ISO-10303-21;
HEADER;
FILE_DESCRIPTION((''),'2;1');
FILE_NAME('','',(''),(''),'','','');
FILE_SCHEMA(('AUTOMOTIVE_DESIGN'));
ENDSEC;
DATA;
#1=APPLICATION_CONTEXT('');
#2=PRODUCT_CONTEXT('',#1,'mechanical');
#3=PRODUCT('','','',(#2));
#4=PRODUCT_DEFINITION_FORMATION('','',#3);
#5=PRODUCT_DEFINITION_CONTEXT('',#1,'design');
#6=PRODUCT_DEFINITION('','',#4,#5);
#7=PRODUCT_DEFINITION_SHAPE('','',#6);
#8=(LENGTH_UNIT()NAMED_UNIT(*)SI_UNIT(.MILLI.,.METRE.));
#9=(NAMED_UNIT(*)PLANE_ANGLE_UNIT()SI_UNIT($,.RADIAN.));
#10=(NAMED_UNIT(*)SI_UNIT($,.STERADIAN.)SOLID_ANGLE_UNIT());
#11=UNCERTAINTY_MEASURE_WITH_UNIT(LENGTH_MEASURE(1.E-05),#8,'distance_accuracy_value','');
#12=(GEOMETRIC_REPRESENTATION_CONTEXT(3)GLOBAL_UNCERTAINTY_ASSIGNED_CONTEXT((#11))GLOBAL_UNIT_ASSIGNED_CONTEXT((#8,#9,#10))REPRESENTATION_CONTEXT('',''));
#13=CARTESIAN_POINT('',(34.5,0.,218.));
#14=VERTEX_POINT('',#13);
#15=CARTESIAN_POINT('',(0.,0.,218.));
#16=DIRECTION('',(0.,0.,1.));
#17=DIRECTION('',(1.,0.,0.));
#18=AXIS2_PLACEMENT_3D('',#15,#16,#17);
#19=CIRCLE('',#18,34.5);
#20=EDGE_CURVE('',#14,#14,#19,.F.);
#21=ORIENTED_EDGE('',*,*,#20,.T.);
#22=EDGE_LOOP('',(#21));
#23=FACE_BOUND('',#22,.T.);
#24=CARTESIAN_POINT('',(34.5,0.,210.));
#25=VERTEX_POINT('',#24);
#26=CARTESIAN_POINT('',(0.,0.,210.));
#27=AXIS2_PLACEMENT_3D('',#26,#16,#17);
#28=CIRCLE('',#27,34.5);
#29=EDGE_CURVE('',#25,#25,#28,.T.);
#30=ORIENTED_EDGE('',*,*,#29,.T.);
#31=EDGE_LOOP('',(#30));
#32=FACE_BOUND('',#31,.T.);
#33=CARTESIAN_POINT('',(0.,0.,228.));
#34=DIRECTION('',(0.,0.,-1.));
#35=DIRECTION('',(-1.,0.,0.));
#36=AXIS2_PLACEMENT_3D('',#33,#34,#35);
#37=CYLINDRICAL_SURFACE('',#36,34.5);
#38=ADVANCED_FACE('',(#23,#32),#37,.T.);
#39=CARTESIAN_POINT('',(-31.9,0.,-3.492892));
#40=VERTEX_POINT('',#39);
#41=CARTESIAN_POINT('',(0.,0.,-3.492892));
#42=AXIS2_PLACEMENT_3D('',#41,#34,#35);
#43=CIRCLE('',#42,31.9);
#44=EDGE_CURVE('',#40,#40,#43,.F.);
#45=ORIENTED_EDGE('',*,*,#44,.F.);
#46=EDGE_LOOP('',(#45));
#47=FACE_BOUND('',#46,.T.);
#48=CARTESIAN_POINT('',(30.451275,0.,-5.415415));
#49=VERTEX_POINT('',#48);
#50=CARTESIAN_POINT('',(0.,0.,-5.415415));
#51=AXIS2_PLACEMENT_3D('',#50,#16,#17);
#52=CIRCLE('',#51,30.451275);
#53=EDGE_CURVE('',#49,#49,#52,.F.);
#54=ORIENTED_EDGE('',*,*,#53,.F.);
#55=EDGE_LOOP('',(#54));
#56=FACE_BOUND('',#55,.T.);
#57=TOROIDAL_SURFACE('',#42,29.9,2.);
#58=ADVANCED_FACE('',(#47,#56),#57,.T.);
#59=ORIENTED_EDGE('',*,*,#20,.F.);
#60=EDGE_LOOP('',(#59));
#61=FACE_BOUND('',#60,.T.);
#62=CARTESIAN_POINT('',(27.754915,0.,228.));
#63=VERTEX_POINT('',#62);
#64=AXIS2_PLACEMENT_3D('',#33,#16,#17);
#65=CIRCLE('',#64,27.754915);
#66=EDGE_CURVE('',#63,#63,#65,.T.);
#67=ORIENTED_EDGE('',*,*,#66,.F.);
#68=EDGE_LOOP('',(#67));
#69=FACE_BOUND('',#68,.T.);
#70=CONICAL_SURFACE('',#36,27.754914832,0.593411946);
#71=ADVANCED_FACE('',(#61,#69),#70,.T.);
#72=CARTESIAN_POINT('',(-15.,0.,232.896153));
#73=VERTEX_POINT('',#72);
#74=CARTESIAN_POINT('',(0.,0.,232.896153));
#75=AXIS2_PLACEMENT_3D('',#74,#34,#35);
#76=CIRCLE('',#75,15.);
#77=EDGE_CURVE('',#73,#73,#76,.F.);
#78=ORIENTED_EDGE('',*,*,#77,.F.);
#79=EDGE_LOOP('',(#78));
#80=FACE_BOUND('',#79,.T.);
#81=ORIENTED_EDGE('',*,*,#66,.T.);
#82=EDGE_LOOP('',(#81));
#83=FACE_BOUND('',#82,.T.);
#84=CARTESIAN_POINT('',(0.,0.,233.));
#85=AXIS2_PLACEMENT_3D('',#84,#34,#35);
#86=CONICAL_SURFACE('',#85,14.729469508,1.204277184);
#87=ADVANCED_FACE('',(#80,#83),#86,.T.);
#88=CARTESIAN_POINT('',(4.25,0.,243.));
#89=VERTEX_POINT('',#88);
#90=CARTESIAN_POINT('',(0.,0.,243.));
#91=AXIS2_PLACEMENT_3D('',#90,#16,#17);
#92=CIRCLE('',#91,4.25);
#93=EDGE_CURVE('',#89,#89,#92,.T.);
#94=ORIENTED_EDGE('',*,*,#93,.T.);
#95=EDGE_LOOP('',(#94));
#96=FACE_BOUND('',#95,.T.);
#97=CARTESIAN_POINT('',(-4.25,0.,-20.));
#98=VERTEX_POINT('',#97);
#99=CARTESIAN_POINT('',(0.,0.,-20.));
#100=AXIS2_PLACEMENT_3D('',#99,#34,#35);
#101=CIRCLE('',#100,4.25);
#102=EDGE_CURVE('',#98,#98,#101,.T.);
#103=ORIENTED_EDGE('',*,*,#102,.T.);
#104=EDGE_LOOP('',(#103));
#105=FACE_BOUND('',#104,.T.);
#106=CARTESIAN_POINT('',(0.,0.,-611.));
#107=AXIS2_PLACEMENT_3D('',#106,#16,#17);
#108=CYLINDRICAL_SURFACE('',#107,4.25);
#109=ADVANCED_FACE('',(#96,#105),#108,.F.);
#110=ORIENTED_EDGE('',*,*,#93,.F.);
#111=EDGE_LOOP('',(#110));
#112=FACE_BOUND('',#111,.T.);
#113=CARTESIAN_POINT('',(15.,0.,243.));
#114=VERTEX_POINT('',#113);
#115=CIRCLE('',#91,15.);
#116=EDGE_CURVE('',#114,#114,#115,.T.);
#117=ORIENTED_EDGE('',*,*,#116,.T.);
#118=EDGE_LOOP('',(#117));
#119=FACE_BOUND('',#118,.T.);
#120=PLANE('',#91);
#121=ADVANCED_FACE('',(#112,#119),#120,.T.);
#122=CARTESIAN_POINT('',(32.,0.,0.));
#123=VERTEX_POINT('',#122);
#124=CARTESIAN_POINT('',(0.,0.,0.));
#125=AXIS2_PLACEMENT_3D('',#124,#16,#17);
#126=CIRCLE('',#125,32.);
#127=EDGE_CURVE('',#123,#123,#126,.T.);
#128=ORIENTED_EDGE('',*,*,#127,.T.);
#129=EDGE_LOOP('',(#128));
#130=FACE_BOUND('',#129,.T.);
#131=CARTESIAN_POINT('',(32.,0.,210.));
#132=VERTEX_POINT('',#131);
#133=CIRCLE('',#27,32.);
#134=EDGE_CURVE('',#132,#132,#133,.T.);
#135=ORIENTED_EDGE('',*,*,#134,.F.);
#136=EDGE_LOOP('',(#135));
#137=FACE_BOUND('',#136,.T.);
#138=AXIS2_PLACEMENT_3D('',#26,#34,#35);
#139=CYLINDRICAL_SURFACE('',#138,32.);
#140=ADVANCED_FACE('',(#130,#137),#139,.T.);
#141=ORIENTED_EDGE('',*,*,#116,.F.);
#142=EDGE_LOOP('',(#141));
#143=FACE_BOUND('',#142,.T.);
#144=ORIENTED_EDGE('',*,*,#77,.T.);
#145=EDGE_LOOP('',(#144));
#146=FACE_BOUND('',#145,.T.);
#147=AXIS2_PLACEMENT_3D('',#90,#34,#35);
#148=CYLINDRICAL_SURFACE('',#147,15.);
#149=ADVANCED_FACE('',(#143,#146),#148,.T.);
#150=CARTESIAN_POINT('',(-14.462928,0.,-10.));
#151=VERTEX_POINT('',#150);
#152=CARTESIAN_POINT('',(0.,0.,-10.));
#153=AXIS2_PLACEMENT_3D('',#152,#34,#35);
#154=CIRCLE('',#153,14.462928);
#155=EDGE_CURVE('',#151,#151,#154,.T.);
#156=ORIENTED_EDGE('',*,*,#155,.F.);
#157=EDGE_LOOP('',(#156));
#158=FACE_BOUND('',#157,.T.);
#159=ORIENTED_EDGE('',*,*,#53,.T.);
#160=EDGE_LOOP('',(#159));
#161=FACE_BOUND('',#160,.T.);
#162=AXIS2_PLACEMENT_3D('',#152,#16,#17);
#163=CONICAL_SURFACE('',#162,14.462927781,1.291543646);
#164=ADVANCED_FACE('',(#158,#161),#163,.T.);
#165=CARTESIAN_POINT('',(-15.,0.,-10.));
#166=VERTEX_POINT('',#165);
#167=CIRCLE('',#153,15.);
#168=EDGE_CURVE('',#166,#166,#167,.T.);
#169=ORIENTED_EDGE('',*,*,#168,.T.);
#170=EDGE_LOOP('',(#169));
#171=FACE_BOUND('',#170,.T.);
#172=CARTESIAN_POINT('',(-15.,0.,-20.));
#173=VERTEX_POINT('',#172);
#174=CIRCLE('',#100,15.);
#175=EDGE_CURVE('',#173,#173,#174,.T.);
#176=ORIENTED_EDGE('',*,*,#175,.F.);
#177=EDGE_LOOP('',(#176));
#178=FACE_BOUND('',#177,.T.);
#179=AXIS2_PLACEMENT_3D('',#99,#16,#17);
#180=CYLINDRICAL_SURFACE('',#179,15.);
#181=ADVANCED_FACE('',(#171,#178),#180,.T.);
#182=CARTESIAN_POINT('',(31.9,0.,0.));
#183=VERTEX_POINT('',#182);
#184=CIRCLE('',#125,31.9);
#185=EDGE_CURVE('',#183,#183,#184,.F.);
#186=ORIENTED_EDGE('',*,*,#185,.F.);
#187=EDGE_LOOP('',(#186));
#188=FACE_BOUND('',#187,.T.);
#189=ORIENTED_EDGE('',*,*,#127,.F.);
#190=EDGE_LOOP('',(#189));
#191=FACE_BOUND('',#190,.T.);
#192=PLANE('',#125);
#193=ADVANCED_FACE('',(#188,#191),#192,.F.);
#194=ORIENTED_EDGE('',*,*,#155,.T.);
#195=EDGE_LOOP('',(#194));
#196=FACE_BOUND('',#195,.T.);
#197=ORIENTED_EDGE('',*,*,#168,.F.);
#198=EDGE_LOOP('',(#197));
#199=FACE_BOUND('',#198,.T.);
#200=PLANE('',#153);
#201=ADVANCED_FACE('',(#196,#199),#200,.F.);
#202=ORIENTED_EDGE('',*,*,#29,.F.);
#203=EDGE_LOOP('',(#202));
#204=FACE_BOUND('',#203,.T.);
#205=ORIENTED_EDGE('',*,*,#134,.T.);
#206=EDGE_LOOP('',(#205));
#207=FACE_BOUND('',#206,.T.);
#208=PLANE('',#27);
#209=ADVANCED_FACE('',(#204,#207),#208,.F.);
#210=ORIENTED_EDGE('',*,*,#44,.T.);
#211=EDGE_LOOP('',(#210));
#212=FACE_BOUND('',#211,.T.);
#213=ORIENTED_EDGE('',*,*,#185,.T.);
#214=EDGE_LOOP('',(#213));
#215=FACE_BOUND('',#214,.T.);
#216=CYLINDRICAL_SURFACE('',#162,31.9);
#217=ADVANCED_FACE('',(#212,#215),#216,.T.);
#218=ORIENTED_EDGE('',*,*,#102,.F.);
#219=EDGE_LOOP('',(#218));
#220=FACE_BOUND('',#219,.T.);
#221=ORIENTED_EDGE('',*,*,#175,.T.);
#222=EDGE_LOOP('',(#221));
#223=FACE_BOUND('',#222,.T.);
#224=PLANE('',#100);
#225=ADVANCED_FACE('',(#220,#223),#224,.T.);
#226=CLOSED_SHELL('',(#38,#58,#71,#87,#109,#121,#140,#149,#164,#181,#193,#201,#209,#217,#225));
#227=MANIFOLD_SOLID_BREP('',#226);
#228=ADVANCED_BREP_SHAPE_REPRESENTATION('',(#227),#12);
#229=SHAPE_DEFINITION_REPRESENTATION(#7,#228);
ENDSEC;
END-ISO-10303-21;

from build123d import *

# Parameters (mm, degrees)
SKETCH1_R           = 32
BOSS_EXTRUDE1_DEPTH = 210
SKETCH2_R           = 34.5
BOSS_EXTRUDE2_DEPTH = 18
CHAMFER1_SIZE       = 10
CHAMFER1_SIZE2      = 6.745085168
SKETCH3_R           = 27.754914832
BOSS_EXTRUDE3_DEPTH = 5
SKETCH4_R           = 15
BOSS_EXTRUDE4_DEPTH = 10
SKETCH5_R           = 4.25
CUT_EXTRUDE1_DEPTH  = 854
CHAMFER2_SIZE       = 5
CHAMFER2_SIZE_2     = 13.025445323
SKETCH7_R           = 31.9
BOSS_EXTRUDE7_DEPTH = 10
CHAMFER3_SIZE       = 5
CHAMFER3_SIZE2      = 17.437072219
FILLET1_R           = 2
BOSS_EXTRUDE8_START = 10
SKETCH8_R           = 15
BOSS_EXTRUDE8_DEPTH = 10
CUT_EXTRUDE2_START  = -311
SKETCH9_R           = 4.25
CUT_EXTRUDE2_DEPTH  = 311


with BuildPart() as part:
    # Sketch1 → Boss-Extrude1 (new body)
    with BuildSketch(Plane.XY):
        Circle(SKETCH1_R)
    extrude(amount=BOSS_EXTRUDE1_DEPTH)

    # Sketch2 → Boss-Extrude2 (add)
    with BuildSketch(Plane.XY.offset(210)):
        Circle(SKETCH2_R)
    extrude(amount=BOSS_EXTRUDE2_DEPTH)

    # Chamfer1
    chamfer1_edges = [part.edges().sort_by_distance(p)[0] for p in [
        (-34.5, 0, 228),
    ]]
    chamfer1_side = [part.faces().sort_by_distance(p)[0] for p in [
        (-34.5, 0, 219),
    ]]
    chamfer(chamfer1_edges, length=CHAMFER1_SIZE, length2=CHAMFER1_SIZE2, reference=chamfer1_side[0])

    # Sketch3 → Boss-Extrude3 (add)
    with BuildSketch(Plane.XY.offset(228)):
        Circle(SKETCH3_R)
    extrude(amount=BOSS_EXTRUDE3_DEPTH)

    # Sketch4 → Boss-Extrude4 (add)
    with BuildSketch(Plane.XY.offset(233)):
        Circle(SKETCH4_R)
    extrude(amount=BOSS_EXTRUDE4_DEPTH)

    # Sketch5 → Cut-Extrude1 (cut)
    with BuildSketch(Plane.XY.offset(243)):
        Circle(SKETCH5_R)
    extrude(amount=-CUT_EXTRUDE1_DEPTH, mode=Mode.SUBTRACT)

    # Chamfer2
    # the kernel refuses this chamfer: 13.025445323, 5 mm, written as the material it takes off along each edge
    with BuildSketch(Plane(origin=(0, 0, 233), x_dir=(1, 0, 0), z_dir=(0, -1, 0))) as chamfer2_piece_1_section:
        Polygon((27.754914832, -CHAMFER2_SIZE), (27.754914832 - CHAMFER2_SIZE_2, 0), (27.754914832, 0), align=None)
    chamfer2_piece_1 = revolve(axis=Axis((0, 0, 233), (0, 0, 1)), mode=Mode.PRIVATE)
    chamfer2_piece_1 = chamfer2_piece_1 - Plane(origin=(0, 0, 228.02141562), x_dir=(1, 0, 0), z_dir=(0, 0, -1)) * Cylinder(15, 112, mode=Mode.PRIVATE)
    add(chamfer2_piece_1, mode=Mode.SUBTRACT)

    # Sketch7 → Boss-Extrude7 (add)
    with BuildSketch(Plane(origin=(0, 0, 0), x_dir=(-1, 0, 0), z_dir=(0, 0, -1))):
        with Locations(Location((0, 0, 0), (0, 0, 180))):
            Circle(SKETCH7_R)
    extrude(amount=BOSS_EXTRUDE7_DEPTH)

    # Chamfer3
    chamfer3_edges = [part.edges().sort_by_distance(p)[0] for p in [
        (-31.9, 0, -10),
    ]]
    chamfer3_side = [part.faces().sort_by_distance(p)[0] for p in [
        (-31.9, 0, -5),
    ]]
    chamfer(chamfer3_edges, length=CHAMFER3_SIZE, length2=CHAMFER3_SIZE2, reference=chamfer3_side[0])

    # Fillet1
    fillet1_edges = [part.edges().sort_by_distance(p)[0] for p in [
        (-31.9, 0, -5),
    ]]
    fillet(fillet1_edges, radius=FILLET1_R)

    # Sketch8 → Boss-Extrude8 (add)
    with BuildSketch(Plane(origin=(0, 0, -10), x_dir=(-1, 0, 0), z_dir=(0, 0, -1)).offset(BOSS_EXTRUDE8_START)):
        Circle(SKETCH8_R)
    extrude(amount=-BOSS_EXTRUDE8_DEPTH)

    # Sketch9 → Cut-Extrude2 (cut)
    with BuildSketch(Plane(origin=(0, 0, -20), x_dir=(-1, 0, 0), z_dir=(0, 0, -1)).offset(CUT_EXTRUDE2_START)):
        with Locations(Location((0, 0, 0), (0, 0, 180))):
            Circle(SKETCH9_R)
    extrude(amount=CUT_EXTRUDE2_DEPTH, mode=Mode.SUBTRACT)


solid = part.part
